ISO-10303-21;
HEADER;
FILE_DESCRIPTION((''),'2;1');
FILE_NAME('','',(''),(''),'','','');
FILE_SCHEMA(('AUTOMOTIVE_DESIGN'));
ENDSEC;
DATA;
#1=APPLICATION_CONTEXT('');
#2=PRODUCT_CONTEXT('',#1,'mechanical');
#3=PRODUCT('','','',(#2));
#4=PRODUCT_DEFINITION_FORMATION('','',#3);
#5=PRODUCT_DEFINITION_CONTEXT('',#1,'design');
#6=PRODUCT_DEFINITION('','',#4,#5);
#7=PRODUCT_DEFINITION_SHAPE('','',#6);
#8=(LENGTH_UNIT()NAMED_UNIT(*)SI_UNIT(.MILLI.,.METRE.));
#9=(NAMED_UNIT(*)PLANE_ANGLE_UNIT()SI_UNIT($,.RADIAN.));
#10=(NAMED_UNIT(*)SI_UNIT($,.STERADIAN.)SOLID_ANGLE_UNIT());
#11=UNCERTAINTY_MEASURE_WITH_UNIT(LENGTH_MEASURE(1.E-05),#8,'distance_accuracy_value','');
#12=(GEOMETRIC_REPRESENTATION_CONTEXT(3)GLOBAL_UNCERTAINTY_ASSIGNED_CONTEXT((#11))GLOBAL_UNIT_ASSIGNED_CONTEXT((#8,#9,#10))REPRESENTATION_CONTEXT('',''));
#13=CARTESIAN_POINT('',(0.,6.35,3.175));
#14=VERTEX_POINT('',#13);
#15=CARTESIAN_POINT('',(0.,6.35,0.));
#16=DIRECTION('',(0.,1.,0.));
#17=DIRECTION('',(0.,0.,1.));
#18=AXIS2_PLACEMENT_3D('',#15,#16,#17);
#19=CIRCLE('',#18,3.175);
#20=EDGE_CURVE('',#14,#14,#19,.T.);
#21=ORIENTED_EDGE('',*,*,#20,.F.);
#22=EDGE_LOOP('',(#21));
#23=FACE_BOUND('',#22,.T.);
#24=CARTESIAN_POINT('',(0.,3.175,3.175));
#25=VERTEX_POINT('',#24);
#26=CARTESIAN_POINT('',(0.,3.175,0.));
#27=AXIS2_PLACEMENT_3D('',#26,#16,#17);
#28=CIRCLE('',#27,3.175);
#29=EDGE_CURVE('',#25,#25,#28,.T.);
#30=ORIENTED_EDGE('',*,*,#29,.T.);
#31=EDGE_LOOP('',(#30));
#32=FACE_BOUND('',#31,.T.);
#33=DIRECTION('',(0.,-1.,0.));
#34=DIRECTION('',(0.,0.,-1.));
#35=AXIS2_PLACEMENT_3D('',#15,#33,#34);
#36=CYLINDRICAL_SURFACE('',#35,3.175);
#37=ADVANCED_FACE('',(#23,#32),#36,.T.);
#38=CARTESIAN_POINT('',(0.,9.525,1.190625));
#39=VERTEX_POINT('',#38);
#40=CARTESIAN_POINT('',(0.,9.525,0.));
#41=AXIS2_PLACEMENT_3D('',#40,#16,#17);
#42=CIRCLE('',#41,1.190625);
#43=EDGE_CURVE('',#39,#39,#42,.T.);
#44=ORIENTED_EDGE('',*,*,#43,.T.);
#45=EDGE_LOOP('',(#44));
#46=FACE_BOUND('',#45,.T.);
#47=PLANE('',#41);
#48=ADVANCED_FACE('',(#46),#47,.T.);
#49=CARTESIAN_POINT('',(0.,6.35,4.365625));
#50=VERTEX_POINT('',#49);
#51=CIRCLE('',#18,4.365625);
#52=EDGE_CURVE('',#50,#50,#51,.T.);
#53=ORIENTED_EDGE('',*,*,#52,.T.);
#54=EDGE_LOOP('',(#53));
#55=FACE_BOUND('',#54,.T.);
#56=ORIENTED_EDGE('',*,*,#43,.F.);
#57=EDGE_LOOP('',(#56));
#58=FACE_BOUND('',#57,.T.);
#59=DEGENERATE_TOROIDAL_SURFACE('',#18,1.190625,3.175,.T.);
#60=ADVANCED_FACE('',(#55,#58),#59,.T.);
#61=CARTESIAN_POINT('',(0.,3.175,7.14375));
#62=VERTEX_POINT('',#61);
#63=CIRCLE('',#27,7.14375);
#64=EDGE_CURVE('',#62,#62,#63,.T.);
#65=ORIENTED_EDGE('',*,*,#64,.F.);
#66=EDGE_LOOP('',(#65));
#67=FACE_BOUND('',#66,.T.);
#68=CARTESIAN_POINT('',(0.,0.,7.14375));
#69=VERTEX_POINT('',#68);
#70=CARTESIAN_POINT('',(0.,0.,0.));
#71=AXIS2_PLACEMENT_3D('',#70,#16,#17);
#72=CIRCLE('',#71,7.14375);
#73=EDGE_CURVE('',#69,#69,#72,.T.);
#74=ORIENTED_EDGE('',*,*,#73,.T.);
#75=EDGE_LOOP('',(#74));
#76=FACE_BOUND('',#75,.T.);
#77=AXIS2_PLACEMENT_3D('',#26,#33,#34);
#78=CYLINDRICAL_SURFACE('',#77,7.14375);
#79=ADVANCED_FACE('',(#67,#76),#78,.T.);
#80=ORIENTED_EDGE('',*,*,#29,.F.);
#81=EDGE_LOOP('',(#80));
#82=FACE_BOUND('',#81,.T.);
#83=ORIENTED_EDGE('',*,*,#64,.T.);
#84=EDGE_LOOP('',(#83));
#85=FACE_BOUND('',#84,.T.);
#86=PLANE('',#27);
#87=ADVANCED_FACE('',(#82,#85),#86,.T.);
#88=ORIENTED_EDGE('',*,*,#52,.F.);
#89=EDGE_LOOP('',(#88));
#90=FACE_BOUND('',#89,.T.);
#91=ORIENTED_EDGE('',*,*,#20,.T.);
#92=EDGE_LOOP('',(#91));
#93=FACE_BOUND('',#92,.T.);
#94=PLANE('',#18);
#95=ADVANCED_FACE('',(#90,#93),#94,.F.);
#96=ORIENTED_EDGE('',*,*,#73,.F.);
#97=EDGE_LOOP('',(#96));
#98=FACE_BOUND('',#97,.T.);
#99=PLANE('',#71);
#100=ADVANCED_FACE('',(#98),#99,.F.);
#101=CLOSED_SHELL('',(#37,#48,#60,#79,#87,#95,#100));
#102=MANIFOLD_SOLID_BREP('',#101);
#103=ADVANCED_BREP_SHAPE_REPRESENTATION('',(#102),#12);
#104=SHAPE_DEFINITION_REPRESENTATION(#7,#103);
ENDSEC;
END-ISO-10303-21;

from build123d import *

# Parameters (mm, degrees)
SKETCH1_R           = 7.14375
BOSS_EXTRUDE1_DEPTH = 3.175
SKETCH2_R           = 3.175
BOSS_EXTRUDE2_DEPTH = 3.175
SKETCH3_R           = 4.365625
BOSS_EXTRUDE3_DEPTH = 3.175
FILLET1_R           = 3.175


with BuildPart() as part:
    # Sketch1 → Boss-Extrude1 (new body)
    with BuildSketch(Plane(origin=(0, 0, 0), x_dir=(1, 0, 0), z_dir=(0, 1, 0))):
        with Locations(Location((0, 0, 0), (0, 0, 270))):
            Circle(SKETCH1_R)
    extrude(amount=BOSS_EXTRUDE1_DEPTH)

    # Sketch2 → Boss-Extrude2 (add)
    with BuildSketch(Plane(origin=(0, 3.175, 0), x_dir=(1, 0, 0), z_dir=(0, 1, 0))):
        with Locations(Location((0, 0, 0), (0, 0, 270))):
            Circle(SKETCH2_R)
    extrude(amount=BOSS_EXTRUDE2_DEPTH)

    # Sketch3 → Boss-Extrude3 (add)
    with BuildSketch(Plane(origin=(0, 6.35, 0), x_dir=(1, 0, 0), z_dir=(0, 1, 0))):
        with Locations(Location((0, 0, 0), (0, 0, 270))):
            Circle(SKETCH3_R)
    extrude(amount=BOSS_EXTRUDE3_DEPTH)

    # Fillet1
    fillet1_edges = [part.edges().sort_by_distance(p)[0] for p in [
        (0, 9.525, -4.365625),
    ]]
    fillet(fillet1_edges, radius=FILLET1_R - 0.0001)  # a hair under: the kernel refuses the full size


solid = part.part
